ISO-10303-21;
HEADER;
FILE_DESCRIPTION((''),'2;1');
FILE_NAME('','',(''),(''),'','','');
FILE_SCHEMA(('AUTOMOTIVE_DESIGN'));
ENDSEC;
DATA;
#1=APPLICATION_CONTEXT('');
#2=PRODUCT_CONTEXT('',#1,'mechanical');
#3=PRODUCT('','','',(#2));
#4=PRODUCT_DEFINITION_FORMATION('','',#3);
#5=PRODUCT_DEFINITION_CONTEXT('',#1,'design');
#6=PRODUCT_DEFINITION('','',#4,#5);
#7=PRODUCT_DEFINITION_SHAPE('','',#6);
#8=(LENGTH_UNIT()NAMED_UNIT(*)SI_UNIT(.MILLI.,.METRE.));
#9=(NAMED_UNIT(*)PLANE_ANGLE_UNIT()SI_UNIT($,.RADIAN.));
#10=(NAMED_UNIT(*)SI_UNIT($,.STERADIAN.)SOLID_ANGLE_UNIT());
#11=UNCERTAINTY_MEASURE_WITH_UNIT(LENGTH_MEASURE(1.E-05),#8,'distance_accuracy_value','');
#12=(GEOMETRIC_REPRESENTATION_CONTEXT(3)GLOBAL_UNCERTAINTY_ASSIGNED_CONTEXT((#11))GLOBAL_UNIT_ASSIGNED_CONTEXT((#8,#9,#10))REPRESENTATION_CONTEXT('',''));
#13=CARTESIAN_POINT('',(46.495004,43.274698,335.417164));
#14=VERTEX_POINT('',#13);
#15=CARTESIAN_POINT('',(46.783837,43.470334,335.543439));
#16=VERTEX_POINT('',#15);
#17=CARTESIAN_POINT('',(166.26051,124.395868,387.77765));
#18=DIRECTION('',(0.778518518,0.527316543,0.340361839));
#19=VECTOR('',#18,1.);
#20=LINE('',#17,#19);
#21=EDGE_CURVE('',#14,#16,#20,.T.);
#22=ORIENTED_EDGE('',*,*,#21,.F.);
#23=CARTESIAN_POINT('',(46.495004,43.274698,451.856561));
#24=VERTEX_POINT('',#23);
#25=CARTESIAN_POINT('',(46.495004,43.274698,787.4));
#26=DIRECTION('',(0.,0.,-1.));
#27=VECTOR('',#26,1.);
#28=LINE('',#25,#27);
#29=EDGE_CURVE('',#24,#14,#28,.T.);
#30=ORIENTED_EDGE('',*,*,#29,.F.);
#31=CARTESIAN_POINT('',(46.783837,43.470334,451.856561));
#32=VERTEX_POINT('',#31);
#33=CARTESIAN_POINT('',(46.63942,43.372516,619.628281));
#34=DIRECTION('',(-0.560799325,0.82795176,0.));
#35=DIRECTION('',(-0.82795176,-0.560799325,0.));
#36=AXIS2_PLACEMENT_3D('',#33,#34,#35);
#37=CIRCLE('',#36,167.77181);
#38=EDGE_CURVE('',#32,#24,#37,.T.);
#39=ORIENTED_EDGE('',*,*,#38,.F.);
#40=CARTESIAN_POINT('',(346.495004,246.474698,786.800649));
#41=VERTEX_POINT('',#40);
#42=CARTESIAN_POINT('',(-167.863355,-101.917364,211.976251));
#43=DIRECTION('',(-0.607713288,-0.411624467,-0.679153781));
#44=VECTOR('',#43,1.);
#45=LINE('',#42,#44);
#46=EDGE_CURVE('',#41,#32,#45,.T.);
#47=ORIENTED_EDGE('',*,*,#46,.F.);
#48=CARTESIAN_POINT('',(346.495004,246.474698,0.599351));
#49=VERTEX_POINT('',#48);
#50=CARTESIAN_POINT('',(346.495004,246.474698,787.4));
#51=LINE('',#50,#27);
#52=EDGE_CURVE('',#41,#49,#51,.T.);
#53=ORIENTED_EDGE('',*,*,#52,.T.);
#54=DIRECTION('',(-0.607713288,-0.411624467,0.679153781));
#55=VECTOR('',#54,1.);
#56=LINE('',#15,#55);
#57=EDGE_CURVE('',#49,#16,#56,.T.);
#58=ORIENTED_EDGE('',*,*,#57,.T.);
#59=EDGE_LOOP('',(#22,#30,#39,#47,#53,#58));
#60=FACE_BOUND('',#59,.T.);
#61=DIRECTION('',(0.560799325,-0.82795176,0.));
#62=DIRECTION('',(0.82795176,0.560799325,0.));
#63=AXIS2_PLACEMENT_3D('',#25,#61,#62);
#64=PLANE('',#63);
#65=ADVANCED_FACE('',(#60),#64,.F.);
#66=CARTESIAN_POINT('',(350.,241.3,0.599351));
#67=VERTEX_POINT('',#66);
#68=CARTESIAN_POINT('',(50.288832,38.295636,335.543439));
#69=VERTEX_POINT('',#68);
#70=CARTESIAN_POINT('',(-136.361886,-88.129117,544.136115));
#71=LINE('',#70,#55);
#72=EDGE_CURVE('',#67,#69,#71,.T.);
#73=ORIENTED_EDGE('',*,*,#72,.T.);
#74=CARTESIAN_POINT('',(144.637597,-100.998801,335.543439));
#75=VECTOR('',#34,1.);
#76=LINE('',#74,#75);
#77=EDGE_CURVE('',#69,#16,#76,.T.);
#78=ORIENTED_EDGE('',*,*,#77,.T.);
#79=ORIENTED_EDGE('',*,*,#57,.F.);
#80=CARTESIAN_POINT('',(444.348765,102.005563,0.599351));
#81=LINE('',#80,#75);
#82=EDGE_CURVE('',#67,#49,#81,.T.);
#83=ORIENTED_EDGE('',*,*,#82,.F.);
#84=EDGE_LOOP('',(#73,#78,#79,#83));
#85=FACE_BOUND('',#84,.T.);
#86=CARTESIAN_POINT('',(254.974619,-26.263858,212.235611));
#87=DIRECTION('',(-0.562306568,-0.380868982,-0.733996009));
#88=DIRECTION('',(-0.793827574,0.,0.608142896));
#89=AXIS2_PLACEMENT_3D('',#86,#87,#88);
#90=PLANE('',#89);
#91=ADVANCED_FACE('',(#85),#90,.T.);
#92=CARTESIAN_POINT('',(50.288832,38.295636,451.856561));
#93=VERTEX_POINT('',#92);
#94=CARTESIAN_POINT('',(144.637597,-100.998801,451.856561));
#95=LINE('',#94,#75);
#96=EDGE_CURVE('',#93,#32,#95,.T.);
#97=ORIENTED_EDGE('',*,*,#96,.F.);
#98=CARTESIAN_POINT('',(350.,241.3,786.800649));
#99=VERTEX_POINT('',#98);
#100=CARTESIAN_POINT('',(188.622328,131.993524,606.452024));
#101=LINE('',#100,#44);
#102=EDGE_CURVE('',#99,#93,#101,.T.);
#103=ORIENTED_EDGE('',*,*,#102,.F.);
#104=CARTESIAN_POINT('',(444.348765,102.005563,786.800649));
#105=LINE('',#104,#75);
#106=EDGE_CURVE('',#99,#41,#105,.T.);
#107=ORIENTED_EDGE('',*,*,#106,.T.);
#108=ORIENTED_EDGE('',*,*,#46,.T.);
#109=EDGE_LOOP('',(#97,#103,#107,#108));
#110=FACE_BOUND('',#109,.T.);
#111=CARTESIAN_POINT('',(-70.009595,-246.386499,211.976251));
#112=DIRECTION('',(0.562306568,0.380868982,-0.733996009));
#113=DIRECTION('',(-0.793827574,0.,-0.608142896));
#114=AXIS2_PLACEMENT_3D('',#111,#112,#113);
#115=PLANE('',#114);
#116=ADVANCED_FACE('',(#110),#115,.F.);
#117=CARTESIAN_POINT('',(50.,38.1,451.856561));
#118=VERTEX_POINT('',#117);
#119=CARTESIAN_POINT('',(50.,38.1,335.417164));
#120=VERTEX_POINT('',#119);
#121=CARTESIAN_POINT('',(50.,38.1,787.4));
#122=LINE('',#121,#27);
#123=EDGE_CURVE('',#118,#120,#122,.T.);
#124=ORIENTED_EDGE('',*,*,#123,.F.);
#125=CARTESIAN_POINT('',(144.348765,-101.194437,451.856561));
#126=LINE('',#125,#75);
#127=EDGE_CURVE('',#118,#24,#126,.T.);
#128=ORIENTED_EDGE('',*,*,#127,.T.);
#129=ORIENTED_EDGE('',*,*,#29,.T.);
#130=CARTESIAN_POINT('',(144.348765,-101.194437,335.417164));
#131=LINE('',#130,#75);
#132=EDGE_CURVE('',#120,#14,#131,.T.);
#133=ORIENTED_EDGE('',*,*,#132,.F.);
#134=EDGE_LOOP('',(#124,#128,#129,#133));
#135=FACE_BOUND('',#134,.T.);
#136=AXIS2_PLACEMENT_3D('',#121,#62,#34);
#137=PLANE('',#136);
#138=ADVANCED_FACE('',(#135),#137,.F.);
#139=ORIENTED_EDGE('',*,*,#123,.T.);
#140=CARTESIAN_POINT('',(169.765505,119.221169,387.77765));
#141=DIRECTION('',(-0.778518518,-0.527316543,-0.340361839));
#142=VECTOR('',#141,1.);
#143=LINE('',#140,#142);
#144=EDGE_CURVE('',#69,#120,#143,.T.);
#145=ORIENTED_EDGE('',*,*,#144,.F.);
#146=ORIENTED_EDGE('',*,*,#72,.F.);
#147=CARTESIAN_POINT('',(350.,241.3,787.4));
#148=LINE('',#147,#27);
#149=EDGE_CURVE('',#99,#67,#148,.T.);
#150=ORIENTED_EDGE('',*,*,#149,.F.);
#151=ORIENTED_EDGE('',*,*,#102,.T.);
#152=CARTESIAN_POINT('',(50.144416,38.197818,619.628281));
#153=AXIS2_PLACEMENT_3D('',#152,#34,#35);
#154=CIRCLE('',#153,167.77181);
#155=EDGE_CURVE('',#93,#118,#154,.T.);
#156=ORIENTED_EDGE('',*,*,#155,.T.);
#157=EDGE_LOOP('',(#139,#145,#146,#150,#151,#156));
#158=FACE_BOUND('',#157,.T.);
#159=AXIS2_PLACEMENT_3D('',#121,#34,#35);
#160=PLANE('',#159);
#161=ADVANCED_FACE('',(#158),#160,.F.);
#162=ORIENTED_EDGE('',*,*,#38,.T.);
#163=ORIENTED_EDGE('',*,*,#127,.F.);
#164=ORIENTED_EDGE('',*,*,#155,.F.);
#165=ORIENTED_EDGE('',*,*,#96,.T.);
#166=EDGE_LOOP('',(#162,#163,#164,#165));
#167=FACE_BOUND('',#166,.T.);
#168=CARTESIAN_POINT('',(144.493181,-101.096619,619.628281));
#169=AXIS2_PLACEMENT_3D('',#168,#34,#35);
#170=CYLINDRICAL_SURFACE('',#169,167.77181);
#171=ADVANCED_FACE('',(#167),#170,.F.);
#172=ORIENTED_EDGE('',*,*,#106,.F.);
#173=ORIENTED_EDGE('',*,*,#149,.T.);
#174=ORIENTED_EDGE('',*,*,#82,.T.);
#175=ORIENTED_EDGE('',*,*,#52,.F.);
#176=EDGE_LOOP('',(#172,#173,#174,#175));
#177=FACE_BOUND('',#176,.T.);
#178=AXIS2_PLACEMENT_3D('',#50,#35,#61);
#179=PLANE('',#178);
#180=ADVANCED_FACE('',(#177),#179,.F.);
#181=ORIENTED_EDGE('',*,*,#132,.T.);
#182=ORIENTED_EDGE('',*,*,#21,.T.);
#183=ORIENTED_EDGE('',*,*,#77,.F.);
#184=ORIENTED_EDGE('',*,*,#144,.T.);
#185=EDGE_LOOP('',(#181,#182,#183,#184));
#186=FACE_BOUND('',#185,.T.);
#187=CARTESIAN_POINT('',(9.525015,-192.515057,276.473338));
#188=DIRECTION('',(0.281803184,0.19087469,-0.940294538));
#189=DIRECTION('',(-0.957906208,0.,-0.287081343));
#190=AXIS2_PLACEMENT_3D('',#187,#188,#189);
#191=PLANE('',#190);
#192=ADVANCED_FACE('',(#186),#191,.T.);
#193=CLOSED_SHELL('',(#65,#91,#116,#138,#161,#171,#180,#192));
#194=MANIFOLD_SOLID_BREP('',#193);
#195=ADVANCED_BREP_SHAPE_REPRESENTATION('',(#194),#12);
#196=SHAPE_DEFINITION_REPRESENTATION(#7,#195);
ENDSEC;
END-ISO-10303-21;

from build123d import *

# Parameters (mm, degrees)
BOSS_EXTRUDE1_DEPTH = 787.4
CAVITY1_START       = 209.393974514
CAVITY1_DEPTH       = 6.25
CUT_EXTRUDE1_DEPTH  = 897.209643935


# Read off the part's stored shape, not the designer's step: Cavity1
with BuildPart() as part:
    # Sketch1 → Boss-Extrude1 (new body)
    with BuildSketch(Plane.XY):
        Polygon((50, 38.1), (46.495004217, 43.274698499), (346.495004217, 246.474698499), (350, 241.3), align=None)
    extrude(amount=BOSS_EXTRUDE1_DEPTH)

    # Cavity1 outline → Cavity1 (cut)
    with BuildSketch(Plane(origin=(0, 0, 0), x_dir=(0.9998289109489032, -0.015681339287170415, -0.009810424501047896), z_dir=(0.018497265493313195, 0.8476202272914186, 0.5302808703467569)).offset(CAVITY1_START)):
        Polygon((42.517859439, -261.403351104), (42.802335744, -261.406643092), (342.564789453, 130.215073828), (188.320866524, 132), (41, 132), (41, -261.385786284), align=None)
    extrude(amount=CAVITY1_DEPTH, mode=Mode.SUBTRACT)

    # Sketch2 → Cut-Extrude1 (cut, through all)
    with BuildSketch(Plane(origin=(-5.470595054, 8.076665927, 0), x_dir=(0.8279517598753687, 0.5607993253555854, 0), z_dir=(-0.5607993253555854, 0.8279517598753687, 0))):
        Polygon((63.112893973, -335.543438937), (425.103993165, -0.59935118), (425.103993165, 0), (62.76404229, 0), (62.76404229, -335.417163823), align=None)
        with BuildLine():
            Line((425.103993165, -787.4), (425.103993165, -786.80064882))
            Line((425.103993165, -786.80064882), (63.112893973, -451.856561063))
            ThreePointArc((63.112893973, -451.856561063), (62.938468131, -451.856470391), (62.76404229, -451.856561063))
            Line((62.76404229, -451.856561063), (62.76404229, -787.4))
            Line((62.76404229, -787.4), (425.103993165, -787.4))
        make_face()
    extrude(amount=-CUT_EXTRUDE1_DEPTH, mode=Mode.SUBTRACT)


solid = part.part
